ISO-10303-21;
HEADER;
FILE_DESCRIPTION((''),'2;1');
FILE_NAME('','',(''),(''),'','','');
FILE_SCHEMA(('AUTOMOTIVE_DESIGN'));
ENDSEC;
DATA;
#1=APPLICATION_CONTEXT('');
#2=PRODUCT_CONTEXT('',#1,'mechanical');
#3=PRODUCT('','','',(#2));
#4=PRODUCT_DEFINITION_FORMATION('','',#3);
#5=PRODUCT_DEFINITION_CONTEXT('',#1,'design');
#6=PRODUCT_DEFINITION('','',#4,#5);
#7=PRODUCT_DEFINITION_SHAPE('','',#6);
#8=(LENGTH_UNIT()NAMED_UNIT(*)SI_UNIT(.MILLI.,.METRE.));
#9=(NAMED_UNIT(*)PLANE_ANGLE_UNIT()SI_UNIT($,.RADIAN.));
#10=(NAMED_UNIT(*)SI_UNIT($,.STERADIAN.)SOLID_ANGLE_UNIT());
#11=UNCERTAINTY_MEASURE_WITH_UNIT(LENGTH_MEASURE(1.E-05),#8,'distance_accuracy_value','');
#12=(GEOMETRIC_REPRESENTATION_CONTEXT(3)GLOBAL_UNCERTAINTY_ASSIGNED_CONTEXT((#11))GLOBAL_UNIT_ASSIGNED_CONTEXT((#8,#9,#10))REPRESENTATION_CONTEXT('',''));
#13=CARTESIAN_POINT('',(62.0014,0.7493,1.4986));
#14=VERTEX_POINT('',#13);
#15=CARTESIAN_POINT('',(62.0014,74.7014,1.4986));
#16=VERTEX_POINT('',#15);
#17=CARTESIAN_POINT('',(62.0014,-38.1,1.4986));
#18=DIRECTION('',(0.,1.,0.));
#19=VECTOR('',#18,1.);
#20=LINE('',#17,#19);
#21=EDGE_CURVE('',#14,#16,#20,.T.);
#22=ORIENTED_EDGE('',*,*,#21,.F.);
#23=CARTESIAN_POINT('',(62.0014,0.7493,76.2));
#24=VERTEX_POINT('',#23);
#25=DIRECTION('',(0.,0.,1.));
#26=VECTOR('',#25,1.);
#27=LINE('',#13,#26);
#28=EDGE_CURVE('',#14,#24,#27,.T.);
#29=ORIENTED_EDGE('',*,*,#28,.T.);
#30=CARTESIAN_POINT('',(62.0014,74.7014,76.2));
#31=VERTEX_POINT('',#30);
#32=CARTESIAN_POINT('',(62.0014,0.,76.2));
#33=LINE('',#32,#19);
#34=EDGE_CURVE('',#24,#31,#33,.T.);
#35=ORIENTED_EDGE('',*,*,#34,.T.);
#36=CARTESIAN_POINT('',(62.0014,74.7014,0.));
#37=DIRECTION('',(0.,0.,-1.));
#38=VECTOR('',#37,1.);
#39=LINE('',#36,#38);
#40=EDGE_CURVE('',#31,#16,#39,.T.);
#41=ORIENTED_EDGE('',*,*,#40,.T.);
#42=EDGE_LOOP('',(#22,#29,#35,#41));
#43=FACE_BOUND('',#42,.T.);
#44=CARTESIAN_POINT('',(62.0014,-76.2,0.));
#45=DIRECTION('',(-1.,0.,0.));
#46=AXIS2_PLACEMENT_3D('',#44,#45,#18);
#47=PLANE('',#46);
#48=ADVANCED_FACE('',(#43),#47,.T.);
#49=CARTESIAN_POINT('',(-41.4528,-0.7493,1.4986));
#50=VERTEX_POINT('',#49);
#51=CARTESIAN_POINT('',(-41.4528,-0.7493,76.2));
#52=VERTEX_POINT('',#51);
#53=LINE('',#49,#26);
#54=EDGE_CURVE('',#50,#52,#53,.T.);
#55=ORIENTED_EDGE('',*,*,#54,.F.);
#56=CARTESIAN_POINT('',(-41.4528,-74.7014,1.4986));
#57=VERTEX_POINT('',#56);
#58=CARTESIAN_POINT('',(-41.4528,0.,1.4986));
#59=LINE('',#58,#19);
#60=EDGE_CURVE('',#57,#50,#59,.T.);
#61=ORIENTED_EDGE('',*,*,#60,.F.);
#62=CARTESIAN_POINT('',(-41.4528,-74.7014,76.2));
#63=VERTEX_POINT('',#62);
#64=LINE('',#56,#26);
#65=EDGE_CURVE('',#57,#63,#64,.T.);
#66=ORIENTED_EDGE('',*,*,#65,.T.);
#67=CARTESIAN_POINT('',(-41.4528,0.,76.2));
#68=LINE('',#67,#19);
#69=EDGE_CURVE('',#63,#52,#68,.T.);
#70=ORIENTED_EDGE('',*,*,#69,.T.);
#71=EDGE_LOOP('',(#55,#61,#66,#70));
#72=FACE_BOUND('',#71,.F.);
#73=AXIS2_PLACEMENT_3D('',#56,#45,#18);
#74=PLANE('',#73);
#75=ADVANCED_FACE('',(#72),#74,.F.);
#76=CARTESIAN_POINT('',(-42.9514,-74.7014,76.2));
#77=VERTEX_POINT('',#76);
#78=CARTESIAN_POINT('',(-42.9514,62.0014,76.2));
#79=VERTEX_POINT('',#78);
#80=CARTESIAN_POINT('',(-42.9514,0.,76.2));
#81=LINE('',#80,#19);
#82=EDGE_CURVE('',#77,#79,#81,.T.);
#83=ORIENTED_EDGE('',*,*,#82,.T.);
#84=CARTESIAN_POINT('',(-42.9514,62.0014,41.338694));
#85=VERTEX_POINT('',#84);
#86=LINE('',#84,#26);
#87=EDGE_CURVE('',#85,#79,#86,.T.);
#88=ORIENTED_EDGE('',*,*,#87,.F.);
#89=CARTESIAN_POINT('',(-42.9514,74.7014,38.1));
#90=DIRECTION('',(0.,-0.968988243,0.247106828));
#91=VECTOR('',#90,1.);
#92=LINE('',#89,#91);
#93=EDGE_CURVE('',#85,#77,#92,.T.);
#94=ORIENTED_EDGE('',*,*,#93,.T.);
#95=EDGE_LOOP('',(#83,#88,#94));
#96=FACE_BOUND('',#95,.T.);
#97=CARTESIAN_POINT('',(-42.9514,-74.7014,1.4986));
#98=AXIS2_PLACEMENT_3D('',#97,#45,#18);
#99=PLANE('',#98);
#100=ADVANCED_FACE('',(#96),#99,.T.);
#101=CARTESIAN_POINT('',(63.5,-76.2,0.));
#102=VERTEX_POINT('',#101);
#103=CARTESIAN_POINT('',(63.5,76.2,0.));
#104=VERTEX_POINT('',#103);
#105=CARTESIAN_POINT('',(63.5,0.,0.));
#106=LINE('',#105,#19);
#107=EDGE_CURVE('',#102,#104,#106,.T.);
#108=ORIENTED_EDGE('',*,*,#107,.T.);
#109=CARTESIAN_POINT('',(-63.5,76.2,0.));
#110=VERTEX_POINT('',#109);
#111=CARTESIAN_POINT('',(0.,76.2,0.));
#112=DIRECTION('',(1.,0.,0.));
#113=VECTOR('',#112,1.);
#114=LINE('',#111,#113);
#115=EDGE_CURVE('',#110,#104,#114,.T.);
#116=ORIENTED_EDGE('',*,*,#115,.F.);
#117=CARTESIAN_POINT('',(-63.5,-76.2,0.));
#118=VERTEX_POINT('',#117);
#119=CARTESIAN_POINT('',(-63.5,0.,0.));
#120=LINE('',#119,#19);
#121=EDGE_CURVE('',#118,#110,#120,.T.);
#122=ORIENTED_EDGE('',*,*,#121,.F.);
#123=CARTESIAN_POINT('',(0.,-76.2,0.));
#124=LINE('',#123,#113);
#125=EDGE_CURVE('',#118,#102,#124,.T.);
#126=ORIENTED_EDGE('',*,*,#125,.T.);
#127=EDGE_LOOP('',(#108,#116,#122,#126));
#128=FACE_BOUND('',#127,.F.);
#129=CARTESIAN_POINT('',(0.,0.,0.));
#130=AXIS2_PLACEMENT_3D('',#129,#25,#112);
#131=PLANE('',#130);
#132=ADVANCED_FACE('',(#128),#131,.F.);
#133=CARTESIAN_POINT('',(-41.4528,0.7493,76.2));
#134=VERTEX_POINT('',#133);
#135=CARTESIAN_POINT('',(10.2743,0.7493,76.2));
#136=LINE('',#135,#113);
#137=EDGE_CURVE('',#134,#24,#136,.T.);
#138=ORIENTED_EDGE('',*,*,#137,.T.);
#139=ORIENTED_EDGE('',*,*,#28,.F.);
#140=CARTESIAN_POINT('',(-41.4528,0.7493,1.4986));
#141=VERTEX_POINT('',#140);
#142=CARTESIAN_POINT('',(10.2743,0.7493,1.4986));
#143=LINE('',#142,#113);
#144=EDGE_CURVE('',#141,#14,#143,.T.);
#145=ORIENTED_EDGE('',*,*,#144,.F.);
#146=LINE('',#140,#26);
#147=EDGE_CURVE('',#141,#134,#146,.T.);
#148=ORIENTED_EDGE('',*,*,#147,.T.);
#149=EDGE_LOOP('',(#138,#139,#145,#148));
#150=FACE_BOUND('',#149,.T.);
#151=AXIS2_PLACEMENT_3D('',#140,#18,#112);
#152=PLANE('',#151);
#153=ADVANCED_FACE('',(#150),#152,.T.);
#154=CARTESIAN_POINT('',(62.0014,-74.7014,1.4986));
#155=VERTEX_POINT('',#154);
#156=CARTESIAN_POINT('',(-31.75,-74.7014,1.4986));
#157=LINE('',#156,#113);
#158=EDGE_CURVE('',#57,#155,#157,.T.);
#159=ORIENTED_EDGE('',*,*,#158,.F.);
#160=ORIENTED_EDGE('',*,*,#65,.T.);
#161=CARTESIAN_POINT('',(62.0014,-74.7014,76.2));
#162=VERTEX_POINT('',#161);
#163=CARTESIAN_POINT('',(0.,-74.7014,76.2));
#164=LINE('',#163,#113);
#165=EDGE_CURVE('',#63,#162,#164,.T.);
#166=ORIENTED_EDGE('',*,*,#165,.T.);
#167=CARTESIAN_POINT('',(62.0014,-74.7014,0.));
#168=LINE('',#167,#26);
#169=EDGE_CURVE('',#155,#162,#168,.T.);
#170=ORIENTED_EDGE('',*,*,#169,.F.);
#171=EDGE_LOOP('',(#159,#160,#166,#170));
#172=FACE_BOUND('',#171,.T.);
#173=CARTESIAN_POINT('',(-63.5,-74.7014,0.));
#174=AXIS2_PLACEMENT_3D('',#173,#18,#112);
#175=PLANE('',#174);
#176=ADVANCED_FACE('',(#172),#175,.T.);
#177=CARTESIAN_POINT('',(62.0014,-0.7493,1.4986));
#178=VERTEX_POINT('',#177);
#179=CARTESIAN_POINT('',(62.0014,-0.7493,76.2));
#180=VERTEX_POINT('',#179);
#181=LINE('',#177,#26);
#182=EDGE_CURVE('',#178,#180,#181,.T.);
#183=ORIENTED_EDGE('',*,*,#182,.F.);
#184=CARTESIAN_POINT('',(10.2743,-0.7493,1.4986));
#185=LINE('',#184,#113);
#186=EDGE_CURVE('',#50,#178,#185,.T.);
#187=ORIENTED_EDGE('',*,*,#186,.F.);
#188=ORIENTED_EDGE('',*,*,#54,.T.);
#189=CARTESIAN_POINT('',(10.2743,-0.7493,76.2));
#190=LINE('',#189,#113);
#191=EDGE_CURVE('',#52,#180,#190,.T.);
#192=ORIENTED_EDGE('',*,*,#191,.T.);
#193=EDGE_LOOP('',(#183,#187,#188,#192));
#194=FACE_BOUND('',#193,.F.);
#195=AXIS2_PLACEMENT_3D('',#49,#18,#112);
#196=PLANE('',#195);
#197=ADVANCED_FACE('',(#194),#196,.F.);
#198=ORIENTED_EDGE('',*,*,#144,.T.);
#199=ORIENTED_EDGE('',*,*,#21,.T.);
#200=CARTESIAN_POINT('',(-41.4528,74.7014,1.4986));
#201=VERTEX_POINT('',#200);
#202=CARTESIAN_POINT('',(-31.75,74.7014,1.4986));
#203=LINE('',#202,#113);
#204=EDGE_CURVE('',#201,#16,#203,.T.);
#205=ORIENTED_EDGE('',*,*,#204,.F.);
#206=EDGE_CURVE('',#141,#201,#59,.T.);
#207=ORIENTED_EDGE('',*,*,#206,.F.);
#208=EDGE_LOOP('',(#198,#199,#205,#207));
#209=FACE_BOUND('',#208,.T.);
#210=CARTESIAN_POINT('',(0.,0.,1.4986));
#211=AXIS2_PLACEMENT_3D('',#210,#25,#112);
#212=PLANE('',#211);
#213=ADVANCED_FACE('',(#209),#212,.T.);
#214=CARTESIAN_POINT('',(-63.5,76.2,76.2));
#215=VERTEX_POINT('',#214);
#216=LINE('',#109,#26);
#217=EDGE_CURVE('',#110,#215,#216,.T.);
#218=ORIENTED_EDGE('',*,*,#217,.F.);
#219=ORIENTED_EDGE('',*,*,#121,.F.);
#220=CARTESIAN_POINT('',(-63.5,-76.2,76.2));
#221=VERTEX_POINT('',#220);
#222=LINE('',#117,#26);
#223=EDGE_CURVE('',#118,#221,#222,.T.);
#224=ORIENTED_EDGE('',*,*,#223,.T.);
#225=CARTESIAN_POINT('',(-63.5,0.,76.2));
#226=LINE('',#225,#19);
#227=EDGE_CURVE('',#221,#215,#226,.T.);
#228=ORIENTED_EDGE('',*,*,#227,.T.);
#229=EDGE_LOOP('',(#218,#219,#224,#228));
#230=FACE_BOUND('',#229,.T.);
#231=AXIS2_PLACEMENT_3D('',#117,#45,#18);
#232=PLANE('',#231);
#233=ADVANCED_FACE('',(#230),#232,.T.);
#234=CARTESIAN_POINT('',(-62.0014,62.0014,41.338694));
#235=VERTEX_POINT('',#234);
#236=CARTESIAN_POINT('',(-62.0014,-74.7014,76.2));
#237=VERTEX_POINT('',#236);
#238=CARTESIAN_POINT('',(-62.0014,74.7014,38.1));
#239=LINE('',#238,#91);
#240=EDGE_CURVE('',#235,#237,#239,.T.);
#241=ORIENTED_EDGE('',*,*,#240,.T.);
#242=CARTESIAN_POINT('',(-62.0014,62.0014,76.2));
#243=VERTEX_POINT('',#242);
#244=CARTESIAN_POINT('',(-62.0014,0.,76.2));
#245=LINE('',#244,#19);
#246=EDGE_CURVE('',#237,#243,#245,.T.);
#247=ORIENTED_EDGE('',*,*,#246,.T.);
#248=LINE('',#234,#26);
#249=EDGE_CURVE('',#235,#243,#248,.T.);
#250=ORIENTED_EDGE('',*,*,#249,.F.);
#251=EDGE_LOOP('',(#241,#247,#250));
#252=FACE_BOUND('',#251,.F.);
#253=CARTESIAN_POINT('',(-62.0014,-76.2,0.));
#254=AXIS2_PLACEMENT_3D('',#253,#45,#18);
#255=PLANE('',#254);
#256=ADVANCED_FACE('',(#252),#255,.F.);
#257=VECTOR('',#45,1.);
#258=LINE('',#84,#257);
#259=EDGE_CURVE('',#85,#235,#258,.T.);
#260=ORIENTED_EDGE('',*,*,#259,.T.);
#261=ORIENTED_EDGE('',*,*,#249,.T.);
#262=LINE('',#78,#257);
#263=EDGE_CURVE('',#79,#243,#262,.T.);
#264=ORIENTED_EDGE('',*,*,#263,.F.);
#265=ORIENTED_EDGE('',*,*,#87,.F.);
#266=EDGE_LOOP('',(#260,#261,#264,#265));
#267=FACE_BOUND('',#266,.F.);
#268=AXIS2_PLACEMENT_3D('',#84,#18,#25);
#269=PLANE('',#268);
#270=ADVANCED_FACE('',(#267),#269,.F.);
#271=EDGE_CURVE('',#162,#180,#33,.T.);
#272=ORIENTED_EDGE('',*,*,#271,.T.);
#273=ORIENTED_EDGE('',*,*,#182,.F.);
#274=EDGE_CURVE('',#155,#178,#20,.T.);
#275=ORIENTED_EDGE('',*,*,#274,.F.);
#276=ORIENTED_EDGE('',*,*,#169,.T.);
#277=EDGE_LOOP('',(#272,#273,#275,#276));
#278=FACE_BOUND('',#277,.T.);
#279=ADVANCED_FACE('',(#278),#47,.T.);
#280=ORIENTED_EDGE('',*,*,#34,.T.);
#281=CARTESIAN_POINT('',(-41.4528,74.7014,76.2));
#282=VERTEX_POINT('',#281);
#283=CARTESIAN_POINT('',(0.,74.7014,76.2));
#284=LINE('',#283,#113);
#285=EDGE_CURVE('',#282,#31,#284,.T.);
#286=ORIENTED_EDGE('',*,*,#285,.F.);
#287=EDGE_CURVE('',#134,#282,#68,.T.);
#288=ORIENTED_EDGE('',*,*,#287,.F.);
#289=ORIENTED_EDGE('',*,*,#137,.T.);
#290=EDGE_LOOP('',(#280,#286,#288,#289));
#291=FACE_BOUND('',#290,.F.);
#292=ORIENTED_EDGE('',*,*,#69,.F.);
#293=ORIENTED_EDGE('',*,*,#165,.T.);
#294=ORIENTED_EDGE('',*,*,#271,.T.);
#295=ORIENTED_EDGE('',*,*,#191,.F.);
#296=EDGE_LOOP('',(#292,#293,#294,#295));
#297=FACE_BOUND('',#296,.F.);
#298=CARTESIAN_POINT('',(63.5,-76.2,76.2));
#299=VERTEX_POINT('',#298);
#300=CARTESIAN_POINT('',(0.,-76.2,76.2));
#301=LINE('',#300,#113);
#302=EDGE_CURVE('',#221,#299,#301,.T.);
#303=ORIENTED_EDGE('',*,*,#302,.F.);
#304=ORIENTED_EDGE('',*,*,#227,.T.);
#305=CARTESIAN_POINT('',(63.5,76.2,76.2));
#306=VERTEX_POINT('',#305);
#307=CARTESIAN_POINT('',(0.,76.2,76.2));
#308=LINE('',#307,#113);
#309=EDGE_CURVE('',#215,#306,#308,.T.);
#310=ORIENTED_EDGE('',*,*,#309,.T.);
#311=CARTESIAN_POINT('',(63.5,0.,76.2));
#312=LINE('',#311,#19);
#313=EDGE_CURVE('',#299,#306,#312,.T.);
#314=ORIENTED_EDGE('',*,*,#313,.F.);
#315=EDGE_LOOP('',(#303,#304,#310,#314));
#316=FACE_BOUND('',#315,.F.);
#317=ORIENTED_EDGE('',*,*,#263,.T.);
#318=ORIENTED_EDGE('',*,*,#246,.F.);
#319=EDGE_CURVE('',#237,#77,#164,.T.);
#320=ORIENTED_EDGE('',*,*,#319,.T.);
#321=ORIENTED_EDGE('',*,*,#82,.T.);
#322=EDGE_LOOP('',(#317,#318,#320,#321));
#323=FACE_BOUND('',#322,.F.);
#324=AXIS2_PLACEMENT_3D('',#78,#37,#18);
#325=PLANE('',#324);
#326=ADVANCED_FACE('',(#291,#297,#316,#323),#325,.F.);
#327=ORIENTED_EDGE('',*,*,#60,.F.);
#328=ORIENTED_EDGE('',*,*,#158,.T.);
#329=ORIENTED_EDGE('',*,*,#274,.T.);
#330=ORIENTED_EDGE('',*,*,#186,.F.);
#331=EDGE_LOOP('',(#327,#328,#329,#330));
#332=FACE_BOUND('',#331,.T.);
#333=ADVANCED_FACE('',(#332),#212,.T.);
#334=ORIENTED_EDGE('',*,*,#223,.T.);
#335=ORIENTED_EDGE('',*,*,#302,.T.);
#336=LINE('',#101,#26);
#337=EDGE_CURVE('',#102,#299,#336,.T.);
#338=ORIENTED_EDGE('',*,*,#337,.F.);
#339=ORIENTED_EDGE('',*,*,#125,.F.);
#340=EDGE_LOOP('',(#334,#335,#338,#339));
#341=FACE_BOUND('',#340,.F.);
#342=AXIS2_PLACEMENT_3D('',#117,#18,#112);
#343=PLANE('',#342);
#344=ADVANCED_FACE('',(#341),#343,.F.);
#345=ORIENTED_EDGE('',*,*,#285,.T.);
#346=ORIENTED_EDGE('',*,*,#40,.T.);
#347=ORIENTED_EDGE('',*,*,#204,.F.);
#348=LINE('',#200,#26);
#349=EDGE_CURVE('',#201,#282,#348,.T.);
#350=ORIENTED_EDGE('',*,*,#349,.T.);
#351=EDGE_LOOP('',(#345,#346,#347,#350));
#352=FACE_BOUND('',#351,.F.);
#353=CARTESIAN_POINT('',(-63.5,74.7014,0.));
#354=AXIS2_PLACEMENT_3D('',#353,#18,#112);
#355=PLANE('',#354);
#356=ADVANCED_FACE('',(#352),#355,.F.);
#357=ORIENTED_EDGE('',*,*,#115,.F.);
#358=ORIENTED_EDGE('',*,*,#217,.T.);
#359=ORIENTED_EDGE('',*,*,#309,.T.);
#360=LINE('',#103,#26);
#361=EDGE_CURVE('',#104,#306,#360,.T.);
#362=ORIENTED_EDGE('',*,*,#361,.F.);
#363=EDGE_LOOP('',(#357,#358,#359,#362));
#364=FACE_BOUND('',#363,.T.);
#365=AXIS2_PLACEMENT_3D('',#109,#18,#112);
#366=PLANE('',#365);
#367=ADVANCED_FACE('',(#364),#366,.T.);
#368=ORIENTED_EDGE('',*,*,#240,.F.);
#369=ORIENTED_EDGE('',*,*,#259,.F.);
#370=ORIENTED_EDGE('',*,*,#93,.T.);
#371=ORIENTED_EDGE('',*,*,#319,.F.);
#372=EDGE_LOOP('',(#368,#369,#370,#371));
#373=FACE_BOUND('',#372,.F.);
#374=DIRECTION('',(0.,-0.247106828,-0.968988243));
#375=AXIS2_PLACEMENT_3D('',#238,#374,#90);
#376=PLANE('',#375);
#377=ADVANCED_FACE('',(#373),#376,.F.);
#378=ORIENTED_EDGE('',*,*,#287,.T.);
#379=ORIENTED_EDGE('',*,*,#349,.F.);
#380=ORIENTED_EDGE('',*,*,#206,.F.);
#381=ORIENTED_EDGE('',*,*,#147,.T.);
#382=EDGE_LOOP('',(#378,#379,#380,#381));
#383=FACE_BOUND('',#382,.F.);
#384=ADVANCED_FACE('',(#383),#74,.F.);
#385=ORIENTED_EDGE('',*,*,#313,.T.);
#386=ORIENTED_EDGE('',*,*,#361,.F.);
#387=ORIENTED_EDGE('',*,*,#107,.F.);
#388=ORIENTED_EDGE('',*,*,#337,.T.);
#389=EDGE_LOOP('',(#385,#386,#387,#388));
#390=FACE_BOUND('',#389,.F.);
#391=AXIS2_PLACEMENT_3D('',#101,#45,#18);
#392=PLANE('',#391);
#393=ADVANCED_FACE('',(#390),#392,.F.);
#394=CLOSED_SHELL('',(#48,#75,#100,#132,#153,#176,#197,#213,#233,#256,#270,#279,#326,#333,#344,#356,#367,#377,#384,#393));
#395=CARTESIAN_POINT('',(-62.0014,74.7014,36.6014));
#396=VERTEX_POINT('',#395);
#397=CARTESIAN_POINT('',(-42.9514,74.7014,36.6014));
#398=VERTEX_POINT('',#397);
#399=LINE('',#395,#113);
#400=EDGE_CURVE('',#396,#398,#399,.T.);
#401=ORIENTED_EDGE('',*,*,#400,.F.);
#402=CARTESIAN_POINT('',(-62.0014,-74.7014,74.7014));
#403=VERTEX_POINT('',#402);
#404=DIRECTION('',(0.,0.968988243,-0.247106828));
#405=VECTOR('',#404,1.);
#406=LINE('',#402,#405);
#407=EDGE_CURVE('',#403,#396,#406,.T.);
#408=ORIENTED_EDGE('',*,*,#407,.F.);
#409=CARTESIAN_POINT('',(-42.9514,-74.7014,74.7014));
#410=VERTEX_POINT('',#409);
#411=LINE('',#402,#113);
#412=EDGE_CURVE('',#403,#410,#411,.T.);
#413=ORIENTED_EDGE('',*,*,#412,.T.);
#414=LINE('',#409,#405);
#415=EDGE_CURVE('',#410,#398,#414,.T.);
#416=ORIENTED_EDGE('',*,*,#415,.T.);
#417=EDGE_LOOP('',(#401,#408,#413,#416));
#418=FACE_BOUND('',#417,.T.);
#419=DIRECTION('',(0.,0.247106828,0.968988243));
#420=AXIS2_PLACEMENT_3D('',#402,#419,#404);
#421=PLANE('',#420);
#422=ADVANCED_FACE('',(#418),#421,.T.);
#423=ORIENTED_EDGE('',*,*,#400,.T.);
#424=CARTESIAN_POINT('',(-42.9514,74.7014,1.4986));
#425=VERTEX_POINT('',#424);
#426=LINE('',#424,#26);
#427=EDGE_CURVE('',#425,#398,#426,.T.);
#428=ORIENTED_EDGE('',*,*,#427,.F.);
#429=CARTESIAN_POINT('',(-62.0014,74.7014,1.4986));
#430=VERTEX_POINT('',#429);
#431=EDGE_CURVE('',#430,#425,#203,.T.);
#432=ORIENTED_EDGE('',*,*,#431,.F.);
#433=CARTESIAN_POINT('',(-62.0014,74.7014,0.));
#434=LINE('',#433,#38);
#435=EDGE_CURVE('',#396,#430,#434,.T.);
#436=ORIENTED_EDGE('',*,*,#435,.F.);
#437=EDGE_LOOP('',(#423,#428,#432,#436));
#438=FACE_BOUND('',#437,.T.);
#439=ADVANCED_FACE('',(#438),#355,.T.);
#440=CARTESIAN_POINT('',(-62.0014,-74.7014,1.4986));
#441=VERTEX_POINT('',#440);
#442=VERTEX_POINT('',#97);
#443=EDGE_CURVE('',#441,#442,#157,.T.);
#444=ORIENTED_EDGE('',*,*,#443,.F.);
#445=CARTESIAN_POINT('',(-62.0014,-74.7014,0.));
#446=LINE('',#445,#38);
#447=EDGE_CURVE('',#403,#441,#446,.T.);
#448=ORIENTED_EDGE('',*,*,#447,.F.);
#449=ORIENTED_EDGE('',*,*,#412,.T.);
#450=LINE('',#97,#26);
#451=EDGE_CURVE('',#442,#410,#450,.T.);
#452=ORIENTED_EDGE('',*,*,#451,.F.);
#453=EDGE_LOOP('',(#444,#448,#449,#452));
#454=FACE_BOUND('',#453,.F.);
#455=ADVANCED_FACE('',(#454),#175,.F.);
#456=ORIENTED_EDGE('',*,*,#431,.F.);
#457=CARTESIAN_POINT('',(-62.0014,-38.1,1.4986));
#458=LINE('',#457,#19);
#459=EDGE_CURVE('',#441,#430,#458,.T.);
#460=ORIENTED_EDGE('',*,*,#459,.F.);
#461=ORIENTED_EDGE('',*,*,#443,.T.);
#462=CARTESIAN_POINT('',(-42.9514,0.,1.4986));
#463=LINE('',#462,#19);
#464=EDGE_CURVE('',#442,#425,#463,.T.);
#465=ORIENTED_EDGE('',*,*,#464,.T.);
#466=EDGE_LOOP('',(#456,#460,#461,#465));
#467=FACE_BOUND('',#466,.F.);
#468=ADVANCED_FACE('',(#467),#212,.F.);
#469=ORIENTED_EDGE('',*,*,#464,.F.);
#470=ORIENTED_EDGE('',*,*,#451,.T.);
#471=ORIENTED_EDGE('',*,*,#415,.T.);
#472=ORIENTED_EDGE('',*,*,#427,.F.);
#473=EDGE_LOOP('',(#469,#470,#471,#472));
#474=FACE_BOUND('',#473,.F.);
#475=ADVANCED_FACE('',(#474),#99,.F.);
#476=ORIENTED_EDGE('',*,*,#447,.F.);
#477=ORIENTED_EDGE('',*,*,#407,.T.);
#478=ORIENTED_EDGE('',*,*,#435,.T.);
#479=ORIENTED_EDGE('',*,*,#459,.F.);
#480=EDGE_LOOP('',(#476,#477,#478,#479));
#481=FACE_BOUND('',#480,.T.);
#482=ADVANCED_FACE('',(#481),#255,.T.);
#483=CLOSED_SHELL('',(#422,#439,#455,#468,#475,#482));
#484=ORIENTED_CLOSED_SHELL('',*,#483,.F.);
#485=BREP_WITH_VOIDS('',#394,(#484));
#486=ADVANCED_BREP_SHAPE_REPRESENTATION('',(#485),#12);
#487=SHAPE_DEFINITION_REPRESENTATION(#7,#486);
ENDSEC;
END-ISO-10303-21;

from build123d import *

# Parameters (mm, degrees)
F0_W      = 127
F0_H      = 152.4
F1_DEPTH  = 76.2
F2_T      = -1.4986
F3_W      = 1.4986
F3_H      = 149.4028
F5_DEPTH  = 74.7014
F6_DEPTH  = 19.05
F8_DEPTH  = 19.05
F9_W      = 103.4542
F9_H      = 1.4986
F10_DEPTH = 74.7014


# Not quite as in the source:
# - an extrude ends at something that could not be found from the text; its depth is read off the source's solid


with BuildPart() as f1:
    # F0 (on Top) → F1 (new body)
    with BuildSketch(Plane.XY):
        Rectangle(F0_W, F0_H)
    extrude(amount=F1_DEPTH)

    # F2
    f2_openings = [f1.faces().sort_by_distance(p)[0] for p in [
        (0, 0, 76.2),
    ]]
    offset(amount=F2_T, openings=f2_openings)

    # F3 (on face) → F5 (join, through all)
    with BuildSketch(Plane.XY.offset(1.4986)):
        with Locations((-42.2021, 0)):
            Rectangle(F3_W, F3_H)
    extrude(amount=F5_DEPTH)

    # F4 (on face) → F6 (join, through all)
    with BuildSketch(Plane.YZ.offset(-62.0014)):
        Polygon((-74.7014, 74.7014), (74.7014, 36.6014), (74.7014, 38.1), (-74.7014, 76.2), align=None)
    extrude(amount=F6_DEPTH)

    # F7 (on face) → F8 (join, through all)
    with BuildSketch(Plane(origin=(-42.9514, 0, 0), x_dir=(0, -1, 0), z_dir=(-1, 0, 0))):
        Polygon((-74.7014, 76.2), (-74.7014, 38.1), (-62.0014, 41.3386943217), (-62.0014, 76.2), align=None)
    extrude(amount=F8_DEPTH)

    # F9 (on face) → F10 (join, through all)
    with BuildSketch(Plane.XY.offset(1.4986)):
        with Locations((10.2743, 0)):
            Rectangle(F9_W, F9_H)
    extrude(amount=F10_DEPTH)


solid = f1.part
